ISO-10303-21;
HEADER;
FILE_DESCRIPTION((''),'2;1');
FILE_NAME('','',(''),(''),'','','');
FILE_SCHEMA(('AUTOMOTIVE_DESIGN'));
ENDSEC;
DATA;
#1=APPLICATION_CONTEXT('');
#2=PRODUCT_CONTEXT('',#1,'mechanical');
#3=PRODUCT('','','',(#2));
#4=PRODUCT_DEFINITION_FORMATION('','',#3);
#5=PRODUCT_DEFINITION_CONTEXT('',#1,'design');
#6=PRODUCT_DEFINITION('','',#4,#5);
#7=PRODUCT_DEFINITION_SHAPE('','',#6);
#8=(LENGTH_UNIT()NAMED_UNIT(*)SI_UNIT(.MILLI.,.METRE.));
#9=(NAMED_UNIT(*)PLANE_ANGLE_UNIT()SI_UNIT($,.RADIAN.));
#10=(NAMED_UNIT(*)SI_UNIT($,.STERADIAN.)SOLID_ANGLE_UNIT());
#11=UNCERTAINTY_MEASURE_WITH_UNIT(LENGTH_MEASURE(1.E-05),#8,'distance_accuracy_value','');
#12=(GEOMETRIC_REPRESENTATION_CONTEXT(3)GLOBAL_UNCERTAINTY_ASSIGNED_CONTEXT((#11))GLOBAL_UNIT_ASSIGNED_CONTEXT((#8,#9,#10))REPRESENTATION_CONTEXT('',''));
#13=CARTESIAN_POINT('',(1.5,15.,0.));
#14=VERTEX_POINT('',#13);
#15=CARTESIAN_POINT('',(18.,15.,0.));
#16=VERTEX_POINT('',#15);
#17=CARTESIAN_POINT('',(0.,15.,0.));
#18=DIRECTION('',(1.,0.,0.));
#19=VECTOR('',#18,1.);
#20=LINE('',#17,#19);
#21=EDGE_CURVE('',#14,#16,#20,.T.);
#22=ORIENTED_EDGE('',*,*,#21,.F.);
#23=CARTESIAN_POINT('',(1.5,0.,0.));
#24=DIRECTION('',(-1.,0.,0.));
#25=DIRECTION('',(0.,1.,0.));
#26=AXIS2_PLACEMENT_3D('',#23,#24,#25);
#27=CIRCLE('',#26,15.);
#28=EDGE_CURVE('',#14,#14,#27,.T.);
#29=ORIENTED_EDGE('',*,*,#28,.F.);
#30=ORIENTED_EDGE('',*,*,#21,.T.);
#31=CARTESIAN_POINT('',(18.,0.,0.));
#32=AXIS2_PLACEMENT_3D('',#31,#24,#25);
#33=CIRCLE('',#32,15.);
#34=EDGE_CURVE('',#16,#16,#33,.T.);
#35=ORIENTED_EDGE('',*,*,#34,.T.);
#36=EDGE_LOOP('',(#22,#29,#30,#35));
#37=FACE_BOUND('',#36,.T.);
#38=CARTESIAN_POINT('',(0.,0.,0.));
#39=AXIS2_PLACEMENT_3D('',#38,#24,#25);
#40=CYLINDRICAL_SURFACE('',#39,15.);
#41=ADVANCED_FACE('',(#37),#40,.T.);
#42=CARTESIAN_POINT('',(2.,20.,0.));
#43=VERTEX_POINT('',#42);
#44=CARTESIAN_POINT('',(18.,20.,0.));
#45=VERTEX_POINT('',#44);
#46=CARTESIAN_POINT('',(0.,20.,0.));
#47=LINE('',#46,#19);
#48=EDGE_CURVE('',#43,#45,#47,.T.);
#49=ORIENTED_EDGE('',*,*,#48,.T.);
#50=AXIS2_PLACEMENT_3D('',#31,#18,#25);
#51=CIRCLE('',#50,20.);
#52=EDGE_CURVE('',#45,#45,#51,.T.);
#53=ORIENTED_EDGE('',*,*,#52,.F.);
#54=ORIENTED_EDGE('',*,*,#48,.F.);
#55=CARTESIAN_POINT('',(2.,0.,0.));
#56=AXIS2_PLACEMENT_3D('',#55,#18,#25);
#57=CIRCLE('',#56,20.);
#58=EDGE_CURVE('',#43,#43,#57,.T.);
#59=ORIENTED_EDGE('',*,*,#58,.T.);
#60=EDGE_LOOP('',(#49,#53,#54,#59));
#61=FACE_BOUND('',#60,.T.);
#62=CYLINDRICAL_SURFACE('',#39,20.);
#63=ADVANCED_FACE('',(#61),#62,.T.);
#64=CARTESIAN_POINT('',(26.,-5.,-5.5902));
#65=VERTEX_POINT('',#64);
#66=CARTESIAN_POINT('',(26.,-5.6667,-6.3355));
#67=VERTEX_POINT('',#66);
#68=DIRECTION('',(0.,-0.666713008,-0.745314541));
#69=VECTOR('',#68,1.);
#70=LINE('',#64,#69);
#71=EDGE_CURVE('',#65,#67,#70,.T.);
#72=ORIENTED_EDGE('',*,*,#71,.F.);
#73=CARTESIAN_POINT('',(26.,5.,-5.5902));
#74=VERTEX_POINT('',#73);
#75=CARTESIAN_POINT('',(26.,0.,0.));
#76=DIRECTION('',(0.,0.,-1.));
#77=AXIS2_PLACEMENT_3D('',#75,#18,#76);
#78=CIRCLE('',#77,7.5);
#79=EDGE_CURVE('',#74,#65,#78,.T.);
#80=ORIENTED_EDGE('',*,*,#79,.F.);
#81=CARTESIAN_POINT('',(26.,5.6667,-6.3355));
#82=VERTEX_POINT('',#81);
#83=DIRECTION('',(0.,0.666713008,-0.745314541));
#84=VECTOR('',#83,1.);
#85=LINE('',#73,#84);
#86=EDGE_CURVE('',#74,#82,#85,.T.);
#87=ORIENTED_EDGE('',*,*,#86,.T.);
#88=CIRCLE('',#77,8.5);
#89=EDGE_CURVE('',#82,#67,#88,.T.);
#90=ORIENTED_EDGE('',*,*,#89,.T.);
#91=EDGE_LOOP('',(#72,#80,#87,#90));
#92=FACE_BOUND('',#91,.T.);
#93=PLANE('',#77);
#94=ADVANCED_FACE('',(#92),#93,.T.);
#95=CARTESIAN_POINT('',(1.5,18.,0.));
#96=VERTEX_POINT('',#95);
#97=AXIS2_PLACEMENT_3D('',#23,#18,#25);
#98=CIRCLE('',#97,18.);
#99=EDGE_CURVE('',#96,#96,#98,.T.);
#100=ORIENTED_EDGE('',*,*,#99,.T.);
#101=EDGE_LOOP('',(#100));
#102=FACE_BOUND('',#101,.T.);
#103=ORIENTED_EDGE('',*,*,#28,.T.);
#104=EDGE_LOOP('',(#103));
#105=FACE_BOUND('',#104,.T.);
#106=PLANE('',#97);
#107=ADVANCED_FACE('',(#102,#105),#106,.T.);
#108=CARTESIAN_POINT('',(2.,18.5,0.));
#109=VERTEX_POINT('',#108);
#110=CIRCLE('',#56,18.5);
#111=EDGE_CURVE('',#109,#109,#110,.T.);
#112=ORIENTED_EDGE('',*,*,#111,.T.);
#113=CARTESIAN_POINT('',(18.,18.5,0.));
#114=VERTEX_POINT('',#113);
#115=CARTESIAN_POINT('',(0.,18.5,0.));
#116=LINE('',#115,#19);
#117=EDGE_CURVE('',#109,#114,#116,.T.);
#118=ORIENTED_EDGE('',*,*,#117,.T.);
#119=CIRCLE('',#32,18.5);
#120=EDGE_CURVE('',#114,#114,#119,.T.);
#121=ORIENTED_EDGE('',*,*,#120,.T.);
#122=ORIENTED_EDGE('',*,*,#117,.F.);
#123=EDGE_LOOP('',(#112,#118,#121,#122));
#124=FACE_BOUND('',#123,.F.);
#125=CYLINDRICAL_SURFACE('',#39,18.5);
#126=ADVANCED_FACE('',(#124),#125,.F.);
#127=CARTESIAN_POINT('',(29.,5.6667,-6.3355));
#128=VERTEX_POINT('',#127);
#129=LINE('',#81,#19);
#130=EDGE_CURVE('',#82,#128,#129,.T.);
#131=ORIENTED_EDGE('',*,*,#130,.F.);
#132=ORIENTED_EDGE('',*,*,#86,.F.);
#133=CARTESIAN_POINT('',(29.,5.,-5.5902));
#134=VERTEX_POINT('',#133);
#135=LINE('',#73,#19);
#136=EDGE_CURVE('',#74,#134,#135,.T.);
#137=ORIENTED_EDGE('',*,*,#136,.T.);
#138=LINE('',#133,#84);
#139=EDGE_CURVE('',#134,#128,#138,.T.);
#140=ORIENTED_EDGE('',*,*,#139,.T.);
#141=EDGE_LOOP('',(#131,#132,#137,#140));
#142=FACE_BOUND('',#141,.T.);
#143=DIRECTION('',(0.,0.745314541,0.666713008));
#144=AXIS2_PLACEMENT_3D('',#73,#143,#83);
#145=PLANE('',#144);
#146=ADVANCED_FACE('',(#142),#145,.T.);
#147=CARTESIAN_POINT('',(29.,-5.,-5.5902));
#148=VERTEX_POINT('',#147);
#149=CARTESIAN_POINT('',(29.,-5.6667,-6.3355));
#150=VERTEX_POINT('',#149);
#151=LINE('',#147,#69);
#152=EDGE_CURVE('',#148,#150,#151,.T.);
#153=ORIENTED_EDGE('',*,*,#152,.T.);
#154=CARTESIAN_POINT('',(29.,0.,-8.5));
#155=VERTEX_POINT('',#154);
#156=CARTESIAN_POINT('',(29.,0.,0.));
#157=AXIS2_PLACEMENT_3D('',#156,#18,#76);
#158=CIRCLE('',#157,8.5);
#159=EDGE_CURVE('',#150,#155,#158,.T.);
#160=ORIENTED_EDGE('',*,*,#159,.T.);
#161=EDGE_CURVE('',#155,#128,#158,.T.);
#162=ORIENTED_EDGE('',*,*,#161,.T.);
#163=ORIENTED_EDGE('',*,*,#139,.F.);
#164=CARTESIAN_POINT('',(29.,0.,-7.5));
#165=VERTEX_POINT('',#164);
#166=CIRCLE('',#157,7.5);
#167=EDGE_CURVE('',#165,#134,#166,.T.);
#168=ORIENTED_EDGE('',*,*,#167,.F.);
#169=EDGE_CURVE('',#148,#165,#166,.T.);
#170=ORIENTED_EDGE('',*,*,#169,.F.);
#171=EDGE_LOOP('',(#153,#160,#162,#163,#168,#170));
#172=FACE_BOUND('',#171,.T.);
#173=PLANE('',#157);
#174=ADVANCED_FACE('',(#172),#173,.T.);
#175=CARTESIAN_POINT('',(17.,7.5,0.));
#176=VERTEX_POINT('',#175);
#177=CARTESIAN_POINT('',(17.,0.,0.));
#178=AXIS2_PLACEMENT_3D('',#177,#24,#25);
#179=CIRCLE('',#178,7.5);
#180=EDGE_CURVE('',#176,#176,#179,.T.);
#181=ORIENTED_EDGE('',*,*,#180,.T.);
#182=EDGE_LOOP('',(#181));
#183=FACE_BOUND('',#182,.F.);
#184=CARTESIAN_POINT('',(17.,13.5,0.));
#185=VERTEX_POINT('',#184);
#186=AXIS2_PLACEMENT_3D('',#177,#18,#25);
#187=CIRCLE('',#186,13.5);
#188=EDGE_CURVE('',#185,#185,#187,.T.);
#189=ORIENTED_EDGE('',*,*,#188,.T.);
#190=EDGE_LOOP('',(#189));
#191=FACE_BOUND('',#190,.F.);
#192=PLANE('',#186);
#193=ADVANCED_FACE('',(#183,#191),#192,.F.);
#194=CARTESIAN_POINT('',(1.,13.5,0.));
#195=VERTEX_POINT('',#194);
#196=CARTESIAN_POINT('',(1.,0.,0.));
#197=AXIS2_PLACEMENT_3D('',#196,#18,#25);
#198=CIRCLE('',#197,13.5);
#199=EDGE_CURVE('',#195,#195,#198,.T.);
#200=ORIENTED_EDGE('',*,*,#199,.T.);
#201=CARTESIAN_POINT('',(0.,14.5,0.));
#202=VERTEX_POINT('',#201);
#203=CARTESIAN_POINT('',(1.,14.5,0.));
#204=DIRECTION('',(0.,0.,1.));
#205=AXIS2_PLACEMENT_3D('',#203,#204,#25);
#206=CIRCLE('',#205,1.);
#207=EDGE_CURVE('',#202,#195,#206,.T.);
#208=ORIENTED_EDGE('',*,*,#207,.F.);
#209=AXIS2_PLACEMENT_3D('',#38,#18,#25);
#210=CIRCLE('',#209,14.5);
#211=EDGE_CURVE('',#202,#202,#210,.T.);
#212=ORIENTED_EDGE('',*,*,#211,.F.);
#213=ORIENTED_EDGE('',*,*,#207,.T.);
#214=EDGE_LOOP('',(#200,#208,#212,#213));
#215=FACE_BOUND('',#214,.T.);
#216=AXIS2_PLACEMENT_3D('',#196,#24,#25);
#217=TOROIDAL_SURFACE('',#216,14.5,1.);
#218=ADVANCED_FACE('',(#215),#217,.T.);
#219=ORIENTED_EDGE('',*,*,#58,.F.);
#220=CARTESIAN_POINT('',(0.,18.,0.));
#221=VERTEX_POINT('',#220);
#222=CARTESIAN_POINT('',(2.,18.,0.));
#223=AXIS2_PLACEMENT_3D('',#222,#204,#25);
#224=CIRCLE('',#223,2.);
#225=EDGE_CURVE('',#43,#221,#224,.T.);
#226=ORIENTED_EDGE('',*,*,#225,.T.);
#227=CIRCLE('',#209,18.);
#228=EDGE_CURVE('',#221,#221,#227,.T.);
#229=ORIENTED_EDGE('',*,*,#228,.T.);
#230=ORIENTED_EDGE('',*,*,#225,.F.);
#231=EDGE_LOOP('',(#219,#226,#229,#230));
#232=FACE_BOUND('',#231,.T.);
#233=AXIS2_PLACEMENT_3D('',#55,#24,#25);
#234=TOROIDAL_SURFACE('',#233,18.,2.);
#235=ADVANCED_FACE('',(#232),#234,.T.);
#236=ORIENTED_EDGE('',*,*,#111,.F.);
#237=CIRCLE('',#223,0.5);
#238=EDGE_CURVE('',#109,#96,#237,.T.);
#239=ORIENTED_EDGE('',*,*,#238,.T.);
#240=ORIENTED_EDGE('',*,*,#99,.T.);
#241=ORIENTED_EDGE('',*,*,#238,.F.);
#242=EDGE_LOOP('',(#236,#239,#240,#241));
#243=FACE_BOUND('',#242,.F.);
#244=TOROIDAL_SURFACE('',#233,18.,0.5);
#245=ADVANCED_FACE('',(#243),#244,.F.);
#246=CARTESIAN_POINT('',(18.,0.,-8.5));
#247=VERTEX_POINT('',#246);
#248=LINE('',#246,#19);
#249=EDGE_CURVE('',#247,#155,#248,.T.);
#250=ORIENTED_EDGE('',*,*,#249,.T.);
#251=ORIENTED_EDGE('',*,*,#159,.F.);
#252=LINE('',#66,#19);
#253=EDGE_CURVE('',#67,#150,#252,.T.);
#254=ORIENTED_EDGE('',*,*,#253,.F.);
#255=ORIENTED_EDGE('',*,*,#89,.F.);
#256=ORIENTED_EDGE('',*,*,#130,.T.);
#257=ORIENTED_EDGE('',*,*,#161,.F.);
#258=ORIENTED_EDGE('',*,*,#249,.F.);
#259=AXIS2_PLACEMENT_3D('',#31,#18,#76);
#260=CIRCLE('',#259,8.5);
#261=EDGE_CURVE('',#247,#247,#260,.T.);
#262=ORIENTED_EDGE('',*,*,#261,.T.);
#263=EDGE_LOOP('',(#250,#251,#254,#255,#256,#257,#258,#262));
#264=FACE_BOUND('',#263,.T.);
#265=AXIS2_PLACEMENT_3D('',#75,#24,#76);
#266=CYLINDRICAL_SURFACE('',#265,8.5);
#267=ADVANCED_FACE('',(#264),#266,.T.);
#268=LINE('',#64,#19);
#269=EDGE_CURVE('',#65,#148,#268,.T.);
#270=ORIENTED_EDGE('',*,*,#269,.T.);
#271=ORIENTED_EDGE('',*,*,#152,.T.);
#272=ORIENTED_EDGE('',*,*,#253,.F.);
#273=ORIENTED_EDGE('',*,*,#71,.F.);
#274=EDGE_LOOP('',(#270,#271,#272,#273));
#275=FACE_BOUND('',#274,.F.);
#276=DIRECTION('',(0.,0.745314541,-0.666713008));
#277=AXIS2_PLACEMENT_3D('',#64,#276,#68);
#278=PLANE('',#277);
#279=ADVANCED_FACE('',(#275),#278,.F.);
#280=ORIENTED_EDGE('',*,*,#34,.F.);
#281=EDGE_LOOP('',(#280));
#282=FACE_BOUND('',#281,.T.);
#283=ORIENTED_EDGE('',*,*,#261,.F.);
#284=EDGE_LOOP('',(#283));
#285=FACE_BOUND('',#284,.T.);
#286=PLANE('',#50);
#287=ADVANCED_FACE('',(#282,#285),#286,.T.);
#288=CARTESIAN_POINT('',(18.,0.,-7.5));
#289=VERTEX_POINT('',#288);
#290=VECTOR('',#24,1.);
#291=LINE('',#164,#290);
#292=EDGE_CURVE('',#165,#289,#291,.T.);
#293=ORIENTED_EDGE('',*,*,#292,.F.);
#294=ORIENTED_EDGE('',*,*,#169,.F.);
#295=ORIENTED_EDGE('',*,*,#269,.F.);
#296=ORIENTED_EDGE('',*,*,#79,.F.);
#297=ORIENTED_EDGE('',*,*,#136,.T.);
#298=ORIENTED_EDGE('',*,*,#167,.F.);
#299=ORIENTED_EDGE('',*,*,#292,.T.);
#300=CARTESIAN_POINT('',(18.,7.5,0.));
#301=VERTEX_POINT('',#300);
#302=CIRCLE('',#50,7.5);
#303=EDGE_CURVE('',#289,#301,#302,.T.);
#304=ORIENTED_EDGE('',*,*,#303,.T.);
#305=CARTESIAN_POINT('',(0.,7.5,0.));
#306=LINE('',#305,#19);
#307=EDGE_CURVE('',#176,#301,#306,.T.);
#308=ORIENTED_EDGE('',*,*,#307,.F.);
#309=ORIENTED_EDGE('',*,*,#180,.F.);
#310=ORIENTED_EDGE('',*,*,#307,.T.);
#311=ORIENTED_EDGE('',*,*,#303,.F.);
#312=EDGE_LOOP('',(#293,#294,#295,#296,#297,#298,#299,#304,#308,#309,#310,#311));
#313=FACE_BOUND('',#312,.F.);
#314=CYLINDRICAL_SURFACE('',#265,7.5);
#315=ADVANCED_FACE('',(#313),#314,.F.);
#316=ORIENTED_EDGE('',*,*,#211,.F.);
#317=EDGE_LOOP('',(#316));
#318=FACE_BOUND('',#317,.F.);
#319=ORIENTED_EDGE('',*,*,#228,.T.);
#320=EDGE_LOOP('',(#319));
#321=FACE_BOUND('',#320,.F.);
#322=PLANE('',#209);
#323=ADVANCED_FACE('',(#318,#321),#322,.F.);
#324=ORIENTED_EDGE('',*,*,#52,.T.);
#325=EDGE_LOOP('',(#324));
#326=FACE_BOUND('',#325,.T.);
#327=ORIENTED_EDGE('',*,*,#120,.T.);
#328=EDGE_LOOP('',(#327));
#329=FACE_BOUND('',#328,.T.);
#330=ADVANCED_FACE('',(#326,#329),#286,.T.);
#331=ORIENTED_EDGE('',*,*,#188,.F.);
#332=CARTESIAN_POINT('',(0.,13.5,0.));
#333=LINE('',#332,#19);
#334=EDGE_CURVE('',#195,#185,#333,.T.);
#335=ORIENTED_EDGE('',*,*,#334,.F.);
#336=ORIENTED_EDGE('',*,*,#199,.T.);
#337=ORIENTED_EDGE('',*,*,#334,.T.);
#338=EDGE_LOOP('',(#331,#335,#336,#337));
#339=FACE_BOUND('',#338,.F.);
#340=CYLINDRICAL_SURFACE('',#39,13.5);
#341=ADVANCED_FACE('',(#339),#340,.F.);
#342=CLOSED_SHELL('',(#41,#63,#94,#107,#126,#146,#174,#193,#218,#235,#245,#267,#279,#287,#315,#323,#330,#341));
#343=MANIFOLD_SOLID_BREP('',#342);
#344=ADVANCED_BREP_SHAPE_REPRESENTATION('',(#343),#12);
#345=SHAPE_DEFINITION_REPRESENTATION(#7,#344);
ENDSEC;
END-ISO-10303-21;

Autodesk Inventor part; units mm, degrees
ref_plane "XZ Plane" through (0, 0, 0) normal (0, 1, 0) x (-1, 0, 0)
ref_plane "XY Plane" through (0, 0, 0) normal (0, 0, 1) x (1, 0, 0)
ref_plane "Work Plane1" through (20, 0, 0) normal (1, 0, 0) x (0, 1, 0)
sketch "Sketch7" plane through (0, 0, 0) normal (1, 0, 0) x (0, 1, 0)
  circle A0 centre (0, 0) radius 7.5
  circle A1 centre (0, 0) radius 20
  dimension "d28" = 15
  dimension "d29" = 40
extrude "Wheel" add sketch "Sketch7" along normal blind 18
sketch "Sketch8" plane through (0, 0, 0) normal (1, 0, 0) x (0, 1, 0)
  circle A0 centre (0, 0) radius 13.5
  dimension "d33" = 27
extrude "Extrusion7" cut sketch "Sketch8" along normal blind 17
fillet "Fillet1" radius 2 1 edges at (0, -20, 0)
fillet "Fillet2" radius 1 1 edges at (0, -13.5, 0)
shell "Shell1" thickness 1.5 removed faces 1 at (18, 15.6396, -1.5954)
sketch "Sketch10" plane through (18, 0, 0) normal (1, 0, 0) x (0, 0, -1)
  circle A0 centre (0, 0) radius 8.5
  circle A1 centre (0, 0) radius 7.5 projected
  dimension "d41" = 17
extrude "Extrusion9" add sketch "Sketch10" along normal blind 8
sketch "Sketch12" plane through (26, 0, 0) normal (1, 0, 0) x (0, 0, -1)
  circle A0 centre (0, 0) radius 8.5 projected
  circle A1 centre (0, 0) radius 7.5 projected
  line L0 (0, 0) -> (5.5902, -5)
  line L1 (0, 0) -> (5.5902, 5)
  circle A2 centre (0, 0) radius 7.5 projected
  line L2 (5.5902, 5) -> (5.5902, -5) construction
  line L3 (0, 0) -> (0, 5.0755) construction
  line L4 (5.5902, -5) -> (6.3355, -5.6667)
  line L5 (5.5902, 5) -> (6.3355, 5.6667)
  arc A3 (5.5902, -5) -> (5.5902, 5) centre (0, 0) ccw
  arc A4 (6.3355, -5.6667) -> (6.3355, 5.6667) centre (0, 0) ccw
  dimension "d53" = 10
extrude "Extrusion11" add sketch "Sketch12" along normal blind 3 contours A0 L4 A1 L5 picked at (8.0097, 1.2845)
properties part number "RearWheelRight"
